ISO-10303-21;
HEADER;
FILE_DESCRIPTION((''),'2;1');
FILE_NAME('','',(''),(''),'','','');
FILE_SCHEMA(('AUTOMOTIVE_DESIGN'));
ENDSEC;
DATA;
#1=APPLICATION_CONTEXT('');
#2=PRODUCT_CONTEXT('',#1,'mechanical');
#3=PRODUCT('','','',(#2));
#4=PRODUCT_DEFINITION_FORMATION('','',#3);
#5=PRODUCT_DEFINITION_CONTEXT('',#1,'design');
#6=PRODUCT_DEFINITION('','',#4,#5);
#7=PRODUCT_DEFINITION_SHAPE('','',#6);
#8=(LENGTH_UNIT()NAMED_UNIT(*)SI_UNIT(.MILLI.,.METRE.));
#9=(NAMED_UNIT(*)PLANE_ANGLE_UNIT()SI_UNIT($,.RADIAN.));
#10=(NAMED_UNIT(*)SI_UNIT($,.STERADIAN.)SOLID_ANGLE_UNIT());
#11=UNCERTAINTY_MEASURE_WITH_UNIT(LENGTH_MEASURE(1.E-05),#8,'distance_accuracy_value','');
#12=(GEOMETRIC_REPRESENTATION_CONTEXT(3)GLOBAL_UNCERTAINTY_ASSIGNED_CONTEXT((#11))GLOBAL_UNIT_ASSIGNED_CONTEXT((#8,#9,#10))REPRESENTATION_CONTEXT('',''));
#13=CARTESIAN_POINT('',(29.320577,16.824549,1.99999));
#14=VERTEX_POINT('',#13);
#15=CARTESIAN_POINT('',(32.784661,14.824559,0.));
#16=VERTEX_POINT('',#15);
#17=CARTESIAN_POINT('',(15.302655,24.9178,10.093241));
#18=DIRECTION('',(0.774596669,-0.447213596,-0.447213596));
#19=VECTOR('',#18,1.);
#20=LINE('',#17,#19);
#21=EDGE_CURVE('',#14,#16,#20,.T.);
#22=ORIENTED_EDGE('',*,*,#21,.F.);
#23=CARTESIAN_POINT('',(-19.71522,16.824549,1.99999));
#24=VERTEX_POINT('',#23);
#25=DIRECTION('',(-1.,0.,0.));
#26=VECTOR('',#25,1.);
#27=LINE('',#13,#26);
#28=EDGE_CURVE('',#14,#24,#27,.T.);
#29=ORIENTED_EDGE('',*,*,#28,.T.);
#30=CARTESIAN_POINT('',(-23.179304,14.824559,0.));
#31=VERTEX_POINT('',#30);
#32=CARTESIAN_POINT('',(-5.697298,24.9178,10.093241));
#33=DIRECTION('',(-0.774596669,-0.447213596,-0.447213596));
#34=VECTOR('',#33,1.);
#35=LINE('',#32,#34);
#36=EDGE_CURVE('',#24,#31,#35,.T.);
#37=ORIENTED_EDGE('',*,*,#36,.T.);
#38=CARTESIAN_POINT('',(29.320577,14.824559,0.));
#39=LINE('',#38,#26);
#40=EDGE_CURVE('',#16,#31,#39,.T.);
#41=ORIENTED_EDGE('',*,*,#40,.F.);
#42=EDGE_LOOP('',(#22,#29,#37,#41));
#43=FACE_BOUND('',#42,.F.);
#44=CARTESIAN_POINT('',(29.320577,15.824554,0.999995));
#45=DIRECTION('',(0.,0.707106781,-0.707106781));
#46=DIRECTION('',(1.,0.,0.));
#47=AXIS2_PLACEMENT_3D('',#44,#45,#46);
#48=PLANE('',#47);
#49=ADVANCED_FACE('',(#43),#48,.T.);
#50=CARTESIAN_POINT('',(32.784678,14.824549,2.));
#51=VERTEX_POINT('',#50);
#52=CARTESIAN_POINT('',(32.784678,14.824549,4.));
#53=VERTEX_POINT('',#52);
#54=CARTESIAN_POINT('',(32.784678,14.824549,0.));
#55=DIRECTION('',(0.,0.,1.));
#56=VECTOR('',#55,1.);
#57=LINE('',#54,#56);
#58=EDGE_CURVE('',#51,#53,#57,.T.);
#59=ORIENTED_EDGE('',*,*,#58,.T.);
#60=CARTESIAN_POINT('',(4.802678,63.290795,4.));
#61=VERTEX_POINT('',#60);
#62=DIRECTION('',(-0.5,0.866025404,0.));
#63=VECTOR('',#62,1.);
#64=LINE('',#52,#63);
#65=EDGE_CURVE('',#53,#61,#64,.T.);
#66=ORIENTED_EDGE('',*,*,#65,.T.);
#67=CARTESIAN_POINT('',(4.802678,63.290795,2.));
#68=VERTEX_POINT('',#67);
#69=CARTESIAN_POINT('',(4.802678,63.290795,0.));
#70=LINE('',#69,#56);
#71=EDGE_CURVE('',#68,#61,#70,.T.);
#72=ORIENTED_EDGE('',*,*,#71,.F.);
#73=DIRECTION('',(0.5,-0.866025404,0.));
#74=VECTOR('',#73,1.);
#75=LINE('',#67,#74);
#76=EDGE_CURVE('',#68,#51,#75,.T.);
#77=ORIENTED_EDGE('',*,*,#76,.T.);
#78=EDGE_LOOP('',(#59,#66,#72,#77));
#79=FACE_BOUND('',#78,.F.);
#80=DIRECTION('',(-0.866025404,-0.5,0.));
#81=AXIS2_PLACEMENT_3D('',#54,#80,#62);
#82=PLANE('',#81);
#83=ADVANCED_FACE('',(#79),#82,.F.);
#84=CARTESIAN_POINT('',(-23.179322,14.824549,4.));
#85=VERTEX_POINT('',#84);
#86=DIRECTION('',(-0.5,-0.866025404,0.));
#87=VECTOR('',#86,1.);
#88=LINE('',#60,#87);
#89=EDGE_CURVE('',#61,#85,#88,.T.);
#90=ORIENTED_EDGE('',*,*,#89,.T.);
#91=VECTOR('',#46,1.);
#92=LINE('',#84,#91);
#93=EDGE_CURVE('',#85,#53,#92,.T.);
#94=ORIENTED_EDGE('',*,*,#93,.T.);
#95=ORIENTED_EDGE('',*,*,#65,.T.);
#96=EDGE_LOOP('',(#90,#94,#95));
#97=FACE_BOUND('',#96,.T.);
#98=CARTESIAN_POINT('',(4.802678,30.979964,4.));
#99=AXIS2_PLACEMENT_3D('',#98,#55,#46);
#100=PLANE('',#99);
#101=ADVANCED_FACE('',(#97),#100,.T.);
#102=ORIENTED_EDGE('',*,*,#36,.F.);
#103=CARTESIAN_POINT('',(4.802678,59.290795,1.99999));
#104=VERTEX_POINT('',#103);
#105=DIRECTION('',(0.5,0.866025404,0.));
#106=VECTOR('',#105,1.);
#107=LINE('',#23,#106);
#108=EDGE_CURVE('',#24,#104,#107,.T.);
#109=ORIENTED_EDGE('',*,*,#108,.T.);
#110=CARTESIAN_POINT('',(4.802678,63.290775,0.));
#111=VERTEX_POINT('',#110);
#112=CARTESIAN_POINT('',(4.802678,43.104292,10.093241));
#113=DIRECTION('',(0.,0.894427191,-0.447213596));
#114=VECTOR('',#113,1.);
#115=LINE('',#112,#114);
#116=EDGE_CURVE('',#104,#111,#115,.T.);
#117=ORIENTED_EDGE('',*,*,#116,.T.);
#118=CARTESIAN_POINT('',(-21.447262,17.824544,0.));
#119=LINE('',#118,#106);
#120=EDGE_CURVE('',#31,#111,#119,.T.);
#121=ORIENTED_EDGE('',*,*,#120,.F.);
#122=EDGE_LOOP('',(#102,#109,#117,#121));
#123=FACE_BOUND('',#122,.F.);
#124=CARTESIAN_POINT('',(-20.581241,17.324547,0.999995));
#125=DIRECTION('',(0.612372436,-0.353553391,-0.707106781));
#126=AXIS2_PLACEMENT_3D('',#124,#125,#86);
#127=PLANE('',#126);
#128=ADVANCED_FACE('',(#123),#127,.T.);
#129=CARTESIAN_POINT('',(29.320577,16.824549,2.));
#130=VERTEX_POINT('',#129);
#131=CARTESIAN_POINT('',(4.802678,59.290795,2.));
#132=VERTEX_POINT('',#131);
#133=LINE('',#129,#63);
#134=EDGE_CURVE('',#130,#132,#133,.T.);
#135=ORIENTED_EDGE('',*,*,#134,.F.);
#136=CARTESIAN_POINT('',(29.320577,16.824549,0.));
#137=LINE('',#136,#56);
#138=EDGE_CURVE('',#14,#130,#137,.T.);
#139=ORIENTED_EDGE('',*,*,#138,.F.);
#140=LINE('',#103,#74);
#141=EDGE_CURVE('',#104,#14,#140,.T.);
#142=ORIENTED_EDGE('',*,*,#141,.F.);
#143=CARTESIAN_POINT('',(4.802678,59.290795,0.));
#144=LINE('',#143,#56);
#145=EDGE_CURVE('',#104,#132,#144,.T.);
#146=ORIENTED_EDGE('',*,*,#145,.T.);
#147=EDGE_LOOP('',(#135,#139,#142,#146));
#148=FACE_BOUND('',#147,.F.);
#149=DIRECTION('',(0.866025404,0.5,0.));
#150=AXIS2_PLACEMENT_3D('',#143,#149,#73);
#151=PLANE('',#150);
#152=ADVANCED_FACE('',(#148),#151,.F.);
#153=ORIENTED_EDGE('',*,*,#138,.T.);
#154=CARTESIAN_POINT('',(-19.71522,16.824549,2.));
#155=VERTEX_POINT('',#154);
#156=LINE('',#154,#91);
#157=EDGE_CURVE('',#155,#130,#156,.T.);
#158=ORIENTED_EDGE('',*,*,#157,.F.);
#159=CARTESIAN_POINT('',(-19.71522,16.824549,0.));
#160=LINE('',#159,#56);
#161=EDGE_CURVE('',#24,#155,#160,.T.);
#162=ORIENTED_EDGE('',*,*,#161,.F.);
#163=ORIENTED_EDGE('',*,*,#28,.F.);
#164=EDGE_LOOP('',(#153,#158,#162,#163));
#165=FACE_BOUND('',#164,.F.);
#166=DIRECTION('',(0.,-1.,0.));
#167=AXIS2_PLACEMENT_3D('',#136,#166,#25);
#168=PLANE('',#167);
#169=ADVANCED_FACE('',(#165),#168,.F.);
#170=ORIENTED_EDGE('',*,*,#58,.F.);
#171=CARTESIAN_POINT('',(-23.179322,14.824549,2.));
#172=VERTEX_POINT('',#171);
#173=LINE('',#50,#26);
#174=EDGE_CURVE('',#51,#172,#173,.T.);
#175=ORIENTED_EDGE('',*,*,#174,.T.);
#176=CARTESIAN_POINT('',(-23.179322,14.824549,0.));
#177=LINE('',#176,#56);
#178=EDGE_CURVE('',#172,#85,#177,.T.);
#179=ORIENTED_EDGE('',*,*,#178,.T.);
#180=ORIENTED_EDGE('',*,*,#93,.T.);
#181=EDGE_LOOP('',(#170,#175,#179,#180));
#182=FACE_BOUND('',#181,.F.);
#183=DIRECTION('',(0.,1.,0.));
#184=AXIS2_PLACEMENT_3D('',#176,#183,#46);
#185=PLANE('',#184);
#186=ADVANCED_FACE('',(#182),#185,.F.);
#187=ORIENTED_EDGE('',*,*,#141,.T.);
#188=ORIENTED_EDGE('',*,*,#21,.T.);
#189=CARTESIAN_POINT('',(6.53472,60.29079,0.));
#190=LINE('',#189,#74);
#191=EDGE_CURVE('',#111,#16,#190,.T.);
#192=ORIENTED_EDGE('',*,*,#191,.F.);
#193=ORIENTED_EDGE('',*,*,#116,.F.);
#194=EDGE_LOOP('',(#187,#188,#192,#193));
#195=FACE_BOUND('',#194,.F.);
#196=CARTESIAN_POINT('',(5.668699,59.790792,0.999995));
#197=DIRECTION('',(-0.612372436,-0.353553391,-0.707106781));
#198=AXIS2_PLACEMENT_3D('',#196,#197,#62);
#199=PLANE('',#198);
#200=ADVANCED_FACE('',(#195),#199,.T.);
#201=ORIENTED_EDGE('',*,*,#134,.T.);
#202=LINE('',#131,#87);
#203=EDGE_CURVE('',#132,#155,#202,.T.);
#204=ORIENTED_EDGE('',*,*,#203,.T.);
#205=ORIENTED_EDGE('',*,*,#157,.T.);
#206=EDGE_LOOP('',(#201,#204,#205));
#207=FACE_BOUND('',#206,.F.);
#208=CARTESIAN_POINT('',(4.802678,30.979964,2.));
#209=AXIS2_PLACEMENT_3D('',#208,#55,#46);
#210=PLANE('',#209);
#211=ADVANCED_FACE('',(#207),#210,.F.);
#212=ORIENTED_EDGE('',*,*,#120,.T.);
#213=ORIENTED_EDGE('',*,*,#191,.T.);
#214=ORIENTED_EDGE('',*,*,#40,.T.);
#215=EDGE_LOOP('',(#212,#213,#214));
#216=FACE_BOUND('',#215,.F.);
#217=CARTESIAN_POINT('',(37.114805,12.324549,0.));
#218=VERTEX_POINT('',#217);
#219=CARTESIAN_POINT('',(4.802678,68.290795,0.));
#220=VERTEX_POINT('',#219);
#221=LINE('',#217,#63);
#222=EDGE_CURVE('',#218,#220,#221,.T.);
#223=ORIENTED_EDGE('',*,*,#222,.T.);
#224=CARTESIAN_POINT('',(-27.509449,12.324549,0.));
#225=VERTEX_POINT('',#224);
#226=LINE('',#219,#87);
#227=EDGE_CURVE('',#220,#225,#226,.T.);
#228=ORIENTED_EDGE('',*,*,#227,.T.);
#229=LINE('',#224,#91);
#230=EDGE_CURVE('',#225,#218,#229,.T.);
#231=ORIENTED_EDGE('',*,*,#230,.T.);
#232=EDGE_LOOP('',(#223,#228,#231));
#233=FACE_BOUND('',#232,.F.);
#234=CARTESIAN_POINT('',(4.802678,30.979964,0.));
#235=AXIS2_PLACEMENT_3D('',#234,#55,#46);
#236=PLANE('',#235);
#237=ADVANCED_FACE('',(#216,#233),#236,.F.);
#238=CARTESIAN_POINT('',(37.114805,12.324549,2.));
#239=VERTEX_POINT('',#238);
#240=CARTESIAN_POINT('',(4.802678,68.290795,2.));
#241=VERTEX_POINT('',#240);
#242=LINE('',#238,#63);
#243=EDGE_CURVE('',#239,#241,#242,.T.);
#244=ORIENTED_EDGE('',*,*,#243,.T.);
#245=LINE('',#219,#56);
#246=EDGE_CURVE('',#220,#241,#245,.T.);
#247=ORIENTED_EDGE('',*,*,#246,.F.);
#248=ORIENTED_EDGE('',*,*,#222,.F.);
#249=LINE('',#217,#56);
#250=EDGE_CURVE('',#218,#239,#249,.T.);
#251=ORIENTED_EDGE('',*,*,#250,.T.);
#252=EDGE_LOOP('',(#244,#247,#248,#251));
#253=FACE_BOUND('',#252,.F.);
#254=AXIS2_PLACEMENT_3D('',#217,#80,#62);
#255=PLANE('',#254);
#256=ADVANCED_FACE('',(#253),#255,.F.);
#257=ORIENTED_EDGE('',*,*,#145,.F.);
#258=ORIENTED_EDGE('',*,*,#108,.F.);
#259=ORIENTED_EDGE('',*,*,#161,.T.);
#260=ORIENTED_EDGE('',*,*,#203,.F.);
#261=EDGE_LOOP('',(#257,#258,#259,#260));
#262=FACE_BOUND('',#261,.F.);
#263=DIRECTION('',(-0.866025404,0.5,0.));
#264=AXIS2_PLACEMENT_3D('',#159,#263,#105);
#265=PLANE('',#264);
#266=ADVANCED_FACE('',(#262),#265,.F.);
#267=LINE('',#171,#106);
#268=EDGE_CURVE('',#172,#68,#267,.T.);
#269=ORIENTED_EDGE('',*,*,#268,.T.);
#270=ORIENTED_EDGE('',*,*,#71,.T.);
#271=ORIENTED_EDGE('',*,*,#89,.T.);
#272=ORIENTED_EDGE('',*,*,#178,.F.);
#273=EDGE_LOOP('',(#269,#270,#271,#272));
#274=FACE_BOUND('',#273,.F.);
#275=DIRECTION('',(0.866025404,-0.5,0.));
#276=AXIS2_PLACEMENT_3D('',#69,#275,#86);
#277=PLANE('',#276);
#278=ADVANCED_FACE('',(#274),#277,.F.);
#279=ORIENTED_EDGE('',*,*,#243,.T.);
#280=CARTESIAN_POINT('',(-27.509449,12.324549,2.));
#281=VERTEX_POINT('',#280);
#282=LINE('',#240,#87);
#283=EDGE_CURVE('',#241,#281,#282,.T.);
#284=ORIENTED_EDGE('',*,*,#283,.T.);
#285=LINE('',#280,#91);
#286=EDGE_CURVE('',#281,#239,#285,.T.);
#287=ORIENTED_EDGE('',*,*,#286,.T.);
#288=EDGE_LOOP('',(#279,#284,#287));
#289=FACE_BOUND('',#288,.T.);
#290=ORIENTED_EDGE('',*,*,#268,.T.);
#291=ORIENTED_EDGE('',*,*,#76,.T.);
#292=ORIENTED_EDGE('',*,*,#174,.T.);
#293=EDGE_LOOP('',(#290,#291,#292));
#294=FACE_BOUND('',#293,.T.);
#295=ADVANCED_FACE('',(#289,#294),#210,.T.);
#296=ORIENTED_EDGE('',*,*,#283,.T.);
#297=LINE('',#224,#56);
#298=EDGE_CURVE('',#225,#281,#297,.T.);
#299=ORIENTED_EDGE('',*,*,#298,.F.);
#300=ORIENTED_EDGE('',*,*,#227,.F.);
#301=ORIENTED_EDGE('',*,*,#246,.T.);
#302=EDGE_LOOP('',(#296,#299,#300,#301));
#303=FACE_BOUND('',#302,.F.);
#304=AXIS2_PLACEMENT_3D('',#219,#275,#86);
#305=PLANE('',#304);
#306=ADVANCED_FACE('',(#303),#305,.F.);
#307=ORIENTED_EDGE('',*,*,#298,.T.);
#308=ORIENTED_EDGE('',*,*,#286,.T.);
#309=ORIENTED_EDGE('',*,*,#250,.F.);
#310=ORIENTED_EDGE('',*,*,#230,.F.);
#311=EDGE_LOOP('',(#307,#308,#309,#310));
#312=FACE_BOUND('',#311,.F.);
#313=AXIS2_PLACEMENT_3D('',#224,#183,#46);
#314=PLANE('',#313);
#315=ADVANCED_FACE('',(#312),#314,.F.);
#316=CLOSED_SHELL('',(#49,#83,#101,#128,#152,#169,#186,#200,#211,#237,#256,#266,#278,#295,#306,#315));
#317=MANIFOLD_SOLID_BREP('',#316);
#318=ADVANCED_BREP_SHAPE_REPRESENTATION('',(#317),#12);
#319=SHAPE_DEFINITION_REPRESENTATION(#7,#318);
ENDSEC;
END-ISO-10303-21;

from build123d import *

# Parameters (mm, degrees)
F1_DEPTH = 4
F2_DEPTH = 2
F3_START = 2
F3_DEPTH = 2
F4_SIZE  = 1.99999


# Not quite as in the source:
# - a fillet or chamfer is up to 0.001 mm smaller than in the source, because OpenCascade refuses the exact size


with BuildPart() as f1:
    # F0 (on Top) → F1 (new body)
    with BuildSketch(Plane.XY):
        Polygon((32.7846783229, 14.824549064), (4.8026783229, 63.2907947614), (-23.1793216771, 14.824549064), align=None)
        Polygon((-19.715220062, 16.824549064), (4.8026783229, 59.2907947614), (29.3205767077, 16.824549064), align=None, mode=Mode.SUBTRACT)
    extrude(amount=F1_DEPTH)

    # F0 (on Top) → F2 (join)
    with BuildSketch(Plane.XY):
        Polygon((37.1148053418, 12.324549064), (4.8026783229, 68.2907947614), (-27.509448696, 12.324549064), align=None)
        Polygon((-23.1793216771, 14.824549064), (4.8026783229, 63.2907947614), (32.7846783229, 14.824549064), align=None, mode=Mode.SUBTRACT)
    extrude(amount=F2_DEPTH)

    # F0 (on Top) → F3 (join)
    with BuildSketch(Plane.XY.offset(F3_START)):
        Polygon((29.3205767077, 16.824549064), (4.8026783229, 59.2907947614), (-19.715220062, 16.824549064), align=None)
    extrude(amount=F3_DEPTH)

    # F4 (size 2 in the source; OpenCascade refuses exactly that, so slightly less here)
    f4_edges = [f1.edges().sort_by_distance(p)[0] for p in [
        (4.802678, 16.824549, 0),
        (-7.456271, 38.057672, 0),
        (17.061628, 38.057672, 0),
    ]]
    chamfer(f4_edges, length=F4_SIZE)


solid = f1.part
